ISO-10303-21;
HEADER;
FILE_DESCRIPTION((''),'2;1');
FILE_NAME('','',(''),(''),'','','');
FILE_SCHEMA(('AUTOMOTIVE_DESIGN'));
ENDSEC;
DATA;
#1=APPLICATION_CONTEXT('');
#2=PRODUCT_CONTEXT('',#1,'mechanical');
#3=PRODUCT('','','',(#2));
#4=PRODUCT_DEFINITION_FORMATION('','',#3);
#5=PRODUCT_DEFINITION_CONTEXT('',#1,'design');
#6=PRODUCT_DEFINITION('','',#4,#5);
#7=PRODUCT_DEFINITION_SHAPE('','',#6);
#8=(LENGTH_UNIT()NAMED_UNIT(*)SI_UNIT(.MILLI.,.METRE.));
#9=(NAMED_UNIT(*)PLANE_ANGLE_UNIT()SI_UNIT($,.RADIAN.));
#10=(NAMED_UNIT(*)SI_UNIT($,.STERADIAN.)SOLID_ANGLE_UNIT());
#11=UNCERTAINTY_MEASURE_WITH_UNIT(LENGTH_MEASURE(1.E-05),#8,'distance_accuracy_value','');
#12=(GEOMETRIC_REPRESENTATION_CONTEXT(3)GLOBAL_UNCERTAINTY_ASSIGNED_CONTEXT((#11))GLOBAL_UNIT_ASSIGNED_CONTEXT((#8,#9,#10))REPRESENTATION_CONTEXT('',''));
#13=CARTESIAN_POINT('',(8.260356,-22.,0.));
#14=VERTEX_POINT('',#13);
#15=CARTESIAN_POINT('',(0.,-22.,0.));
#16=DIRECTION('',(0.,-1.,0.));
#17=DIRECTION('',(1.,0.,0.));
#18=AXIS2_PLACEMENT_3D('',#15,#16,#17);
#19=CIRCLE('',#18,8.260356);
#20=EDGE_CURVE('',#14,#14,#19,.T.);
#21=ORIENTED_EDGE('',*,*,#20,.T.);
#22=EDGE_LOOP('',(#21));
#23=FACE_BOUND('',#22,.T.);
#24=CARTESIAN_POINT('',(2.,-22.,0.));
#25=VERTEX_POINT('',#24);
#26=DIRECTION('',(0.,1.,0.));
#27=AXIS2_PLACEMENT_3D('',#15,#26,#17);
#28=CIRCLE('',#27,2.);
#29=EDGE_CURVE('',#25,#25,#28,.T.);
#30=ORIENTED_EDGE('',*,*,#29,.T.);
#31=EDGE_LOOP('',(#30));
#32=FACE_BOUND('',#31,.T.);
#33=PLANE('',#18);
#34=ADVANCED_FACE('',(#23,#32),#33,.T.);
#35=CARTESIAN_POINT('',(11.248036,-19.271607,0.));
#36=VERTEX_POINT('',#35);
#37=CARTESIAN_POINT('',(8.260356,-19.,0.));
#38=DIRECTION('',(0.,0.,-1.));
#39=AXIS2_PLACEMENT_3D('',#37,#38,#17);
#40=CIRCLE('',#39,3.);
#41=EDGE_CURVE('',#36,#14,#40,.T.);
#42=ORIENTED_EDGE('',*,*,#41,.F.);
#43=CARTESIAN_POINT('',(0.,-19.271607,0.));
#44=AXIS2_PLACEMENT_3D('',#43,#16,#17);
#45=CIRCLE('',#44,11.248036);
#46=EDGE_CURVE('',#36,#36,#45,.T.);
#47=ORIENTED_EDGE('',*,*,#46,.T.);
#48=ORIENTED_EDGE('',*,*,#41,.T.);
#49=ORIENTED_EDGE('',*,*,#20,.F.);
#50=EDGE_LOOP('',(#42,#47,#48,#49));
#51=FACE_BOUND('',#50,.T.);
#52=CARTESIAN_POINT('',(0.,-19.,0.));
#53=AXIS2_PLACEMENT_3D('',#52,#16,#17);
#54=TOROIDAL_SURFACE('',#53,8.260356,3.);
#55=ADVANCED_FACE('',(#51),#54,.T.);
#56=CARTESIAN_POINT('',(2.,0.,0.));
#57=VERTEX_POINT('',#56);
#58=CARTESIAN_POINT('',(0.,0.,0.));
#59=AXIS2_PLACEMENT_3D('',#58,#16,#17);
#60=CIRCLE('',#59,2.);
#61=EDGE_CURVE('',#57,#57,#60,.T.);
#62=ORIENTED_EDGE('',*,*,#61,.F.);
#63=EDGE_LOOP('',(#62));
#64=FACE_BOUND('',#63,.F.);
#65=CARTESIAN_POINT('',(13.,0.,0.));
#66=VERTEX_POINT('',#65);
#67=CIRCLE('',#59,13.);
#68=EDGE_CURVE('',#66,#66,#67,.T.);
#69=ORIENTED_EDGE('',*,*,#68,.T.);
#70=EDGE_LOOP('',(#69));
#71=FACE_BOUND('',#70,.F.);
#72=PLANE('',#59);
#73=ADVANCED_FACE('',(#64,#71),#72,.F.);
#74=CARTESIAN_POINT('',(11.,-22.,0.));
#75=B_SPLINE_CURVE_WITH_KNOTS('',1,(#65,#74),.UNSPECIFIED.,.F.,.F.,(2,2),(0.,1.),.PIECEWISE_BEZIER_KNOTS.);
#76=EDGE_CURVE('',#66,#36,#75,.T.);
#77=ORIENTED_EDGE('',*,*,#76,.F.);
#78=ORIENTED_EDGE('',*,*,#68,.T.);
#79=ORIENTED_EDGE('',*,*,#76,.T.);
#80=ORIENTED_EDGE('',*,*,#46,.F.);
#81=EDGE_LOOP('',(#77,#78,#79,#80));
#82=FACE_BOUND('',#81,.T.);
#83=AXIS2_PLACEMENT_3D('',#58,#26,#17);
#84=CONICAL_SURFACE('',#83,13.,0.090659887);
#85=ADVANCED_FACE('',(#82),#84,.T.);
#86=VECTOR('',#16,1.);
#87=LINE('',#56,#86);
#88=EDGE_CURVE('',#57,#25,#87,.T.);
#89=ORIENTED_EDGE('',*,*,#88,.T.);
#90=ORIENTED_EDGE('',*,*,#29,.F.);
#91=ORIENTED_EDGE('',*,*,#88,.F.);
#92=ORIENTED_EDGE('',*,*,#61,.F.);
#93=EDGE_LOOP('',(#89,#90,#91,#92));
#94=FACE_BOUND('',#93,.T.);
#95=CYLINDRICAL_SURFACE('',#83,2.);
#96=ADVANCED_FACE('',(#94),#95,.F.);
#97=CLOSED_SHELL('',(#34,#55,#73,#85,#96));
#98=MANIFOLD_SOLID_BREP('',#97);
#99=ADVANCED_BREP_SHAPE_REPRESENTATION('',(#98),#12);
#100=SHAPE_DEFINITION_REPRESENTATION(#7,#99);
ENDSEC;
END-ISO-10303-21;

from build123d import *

# Parameters (mm, degrees)
F0_R     = 13
F2_R     = 11
F4_R     = 3
F5_R     = 2
F6_DEPTH = 22.001


with BuildPart() as f3:
    # F0 (on Front) → F3 section 0
    with BuildSketch(Plane.XZ):
        Circle(F0_R)
    # F2 (on offset) → F3 section 1
    with BuildSketch(Plane.XZ.offset(22)):
        Circle(F2_R)
    loft()

    # F4
    f4_edges = [f3.edges().sort_by_distance(p)[0] for p in [
        (-11, -22, 0),
    ]]
    fillet(f4_edges, radius=F4_R)

    # F5 (on Front) → F6 (cut, through all)
    with BuildSketch(Plane.XZ):
        Circle(F5_R)
    extrude(amount=F6_DEPTH, mode=Mode.SUBTRACT)


solid = f3.part
